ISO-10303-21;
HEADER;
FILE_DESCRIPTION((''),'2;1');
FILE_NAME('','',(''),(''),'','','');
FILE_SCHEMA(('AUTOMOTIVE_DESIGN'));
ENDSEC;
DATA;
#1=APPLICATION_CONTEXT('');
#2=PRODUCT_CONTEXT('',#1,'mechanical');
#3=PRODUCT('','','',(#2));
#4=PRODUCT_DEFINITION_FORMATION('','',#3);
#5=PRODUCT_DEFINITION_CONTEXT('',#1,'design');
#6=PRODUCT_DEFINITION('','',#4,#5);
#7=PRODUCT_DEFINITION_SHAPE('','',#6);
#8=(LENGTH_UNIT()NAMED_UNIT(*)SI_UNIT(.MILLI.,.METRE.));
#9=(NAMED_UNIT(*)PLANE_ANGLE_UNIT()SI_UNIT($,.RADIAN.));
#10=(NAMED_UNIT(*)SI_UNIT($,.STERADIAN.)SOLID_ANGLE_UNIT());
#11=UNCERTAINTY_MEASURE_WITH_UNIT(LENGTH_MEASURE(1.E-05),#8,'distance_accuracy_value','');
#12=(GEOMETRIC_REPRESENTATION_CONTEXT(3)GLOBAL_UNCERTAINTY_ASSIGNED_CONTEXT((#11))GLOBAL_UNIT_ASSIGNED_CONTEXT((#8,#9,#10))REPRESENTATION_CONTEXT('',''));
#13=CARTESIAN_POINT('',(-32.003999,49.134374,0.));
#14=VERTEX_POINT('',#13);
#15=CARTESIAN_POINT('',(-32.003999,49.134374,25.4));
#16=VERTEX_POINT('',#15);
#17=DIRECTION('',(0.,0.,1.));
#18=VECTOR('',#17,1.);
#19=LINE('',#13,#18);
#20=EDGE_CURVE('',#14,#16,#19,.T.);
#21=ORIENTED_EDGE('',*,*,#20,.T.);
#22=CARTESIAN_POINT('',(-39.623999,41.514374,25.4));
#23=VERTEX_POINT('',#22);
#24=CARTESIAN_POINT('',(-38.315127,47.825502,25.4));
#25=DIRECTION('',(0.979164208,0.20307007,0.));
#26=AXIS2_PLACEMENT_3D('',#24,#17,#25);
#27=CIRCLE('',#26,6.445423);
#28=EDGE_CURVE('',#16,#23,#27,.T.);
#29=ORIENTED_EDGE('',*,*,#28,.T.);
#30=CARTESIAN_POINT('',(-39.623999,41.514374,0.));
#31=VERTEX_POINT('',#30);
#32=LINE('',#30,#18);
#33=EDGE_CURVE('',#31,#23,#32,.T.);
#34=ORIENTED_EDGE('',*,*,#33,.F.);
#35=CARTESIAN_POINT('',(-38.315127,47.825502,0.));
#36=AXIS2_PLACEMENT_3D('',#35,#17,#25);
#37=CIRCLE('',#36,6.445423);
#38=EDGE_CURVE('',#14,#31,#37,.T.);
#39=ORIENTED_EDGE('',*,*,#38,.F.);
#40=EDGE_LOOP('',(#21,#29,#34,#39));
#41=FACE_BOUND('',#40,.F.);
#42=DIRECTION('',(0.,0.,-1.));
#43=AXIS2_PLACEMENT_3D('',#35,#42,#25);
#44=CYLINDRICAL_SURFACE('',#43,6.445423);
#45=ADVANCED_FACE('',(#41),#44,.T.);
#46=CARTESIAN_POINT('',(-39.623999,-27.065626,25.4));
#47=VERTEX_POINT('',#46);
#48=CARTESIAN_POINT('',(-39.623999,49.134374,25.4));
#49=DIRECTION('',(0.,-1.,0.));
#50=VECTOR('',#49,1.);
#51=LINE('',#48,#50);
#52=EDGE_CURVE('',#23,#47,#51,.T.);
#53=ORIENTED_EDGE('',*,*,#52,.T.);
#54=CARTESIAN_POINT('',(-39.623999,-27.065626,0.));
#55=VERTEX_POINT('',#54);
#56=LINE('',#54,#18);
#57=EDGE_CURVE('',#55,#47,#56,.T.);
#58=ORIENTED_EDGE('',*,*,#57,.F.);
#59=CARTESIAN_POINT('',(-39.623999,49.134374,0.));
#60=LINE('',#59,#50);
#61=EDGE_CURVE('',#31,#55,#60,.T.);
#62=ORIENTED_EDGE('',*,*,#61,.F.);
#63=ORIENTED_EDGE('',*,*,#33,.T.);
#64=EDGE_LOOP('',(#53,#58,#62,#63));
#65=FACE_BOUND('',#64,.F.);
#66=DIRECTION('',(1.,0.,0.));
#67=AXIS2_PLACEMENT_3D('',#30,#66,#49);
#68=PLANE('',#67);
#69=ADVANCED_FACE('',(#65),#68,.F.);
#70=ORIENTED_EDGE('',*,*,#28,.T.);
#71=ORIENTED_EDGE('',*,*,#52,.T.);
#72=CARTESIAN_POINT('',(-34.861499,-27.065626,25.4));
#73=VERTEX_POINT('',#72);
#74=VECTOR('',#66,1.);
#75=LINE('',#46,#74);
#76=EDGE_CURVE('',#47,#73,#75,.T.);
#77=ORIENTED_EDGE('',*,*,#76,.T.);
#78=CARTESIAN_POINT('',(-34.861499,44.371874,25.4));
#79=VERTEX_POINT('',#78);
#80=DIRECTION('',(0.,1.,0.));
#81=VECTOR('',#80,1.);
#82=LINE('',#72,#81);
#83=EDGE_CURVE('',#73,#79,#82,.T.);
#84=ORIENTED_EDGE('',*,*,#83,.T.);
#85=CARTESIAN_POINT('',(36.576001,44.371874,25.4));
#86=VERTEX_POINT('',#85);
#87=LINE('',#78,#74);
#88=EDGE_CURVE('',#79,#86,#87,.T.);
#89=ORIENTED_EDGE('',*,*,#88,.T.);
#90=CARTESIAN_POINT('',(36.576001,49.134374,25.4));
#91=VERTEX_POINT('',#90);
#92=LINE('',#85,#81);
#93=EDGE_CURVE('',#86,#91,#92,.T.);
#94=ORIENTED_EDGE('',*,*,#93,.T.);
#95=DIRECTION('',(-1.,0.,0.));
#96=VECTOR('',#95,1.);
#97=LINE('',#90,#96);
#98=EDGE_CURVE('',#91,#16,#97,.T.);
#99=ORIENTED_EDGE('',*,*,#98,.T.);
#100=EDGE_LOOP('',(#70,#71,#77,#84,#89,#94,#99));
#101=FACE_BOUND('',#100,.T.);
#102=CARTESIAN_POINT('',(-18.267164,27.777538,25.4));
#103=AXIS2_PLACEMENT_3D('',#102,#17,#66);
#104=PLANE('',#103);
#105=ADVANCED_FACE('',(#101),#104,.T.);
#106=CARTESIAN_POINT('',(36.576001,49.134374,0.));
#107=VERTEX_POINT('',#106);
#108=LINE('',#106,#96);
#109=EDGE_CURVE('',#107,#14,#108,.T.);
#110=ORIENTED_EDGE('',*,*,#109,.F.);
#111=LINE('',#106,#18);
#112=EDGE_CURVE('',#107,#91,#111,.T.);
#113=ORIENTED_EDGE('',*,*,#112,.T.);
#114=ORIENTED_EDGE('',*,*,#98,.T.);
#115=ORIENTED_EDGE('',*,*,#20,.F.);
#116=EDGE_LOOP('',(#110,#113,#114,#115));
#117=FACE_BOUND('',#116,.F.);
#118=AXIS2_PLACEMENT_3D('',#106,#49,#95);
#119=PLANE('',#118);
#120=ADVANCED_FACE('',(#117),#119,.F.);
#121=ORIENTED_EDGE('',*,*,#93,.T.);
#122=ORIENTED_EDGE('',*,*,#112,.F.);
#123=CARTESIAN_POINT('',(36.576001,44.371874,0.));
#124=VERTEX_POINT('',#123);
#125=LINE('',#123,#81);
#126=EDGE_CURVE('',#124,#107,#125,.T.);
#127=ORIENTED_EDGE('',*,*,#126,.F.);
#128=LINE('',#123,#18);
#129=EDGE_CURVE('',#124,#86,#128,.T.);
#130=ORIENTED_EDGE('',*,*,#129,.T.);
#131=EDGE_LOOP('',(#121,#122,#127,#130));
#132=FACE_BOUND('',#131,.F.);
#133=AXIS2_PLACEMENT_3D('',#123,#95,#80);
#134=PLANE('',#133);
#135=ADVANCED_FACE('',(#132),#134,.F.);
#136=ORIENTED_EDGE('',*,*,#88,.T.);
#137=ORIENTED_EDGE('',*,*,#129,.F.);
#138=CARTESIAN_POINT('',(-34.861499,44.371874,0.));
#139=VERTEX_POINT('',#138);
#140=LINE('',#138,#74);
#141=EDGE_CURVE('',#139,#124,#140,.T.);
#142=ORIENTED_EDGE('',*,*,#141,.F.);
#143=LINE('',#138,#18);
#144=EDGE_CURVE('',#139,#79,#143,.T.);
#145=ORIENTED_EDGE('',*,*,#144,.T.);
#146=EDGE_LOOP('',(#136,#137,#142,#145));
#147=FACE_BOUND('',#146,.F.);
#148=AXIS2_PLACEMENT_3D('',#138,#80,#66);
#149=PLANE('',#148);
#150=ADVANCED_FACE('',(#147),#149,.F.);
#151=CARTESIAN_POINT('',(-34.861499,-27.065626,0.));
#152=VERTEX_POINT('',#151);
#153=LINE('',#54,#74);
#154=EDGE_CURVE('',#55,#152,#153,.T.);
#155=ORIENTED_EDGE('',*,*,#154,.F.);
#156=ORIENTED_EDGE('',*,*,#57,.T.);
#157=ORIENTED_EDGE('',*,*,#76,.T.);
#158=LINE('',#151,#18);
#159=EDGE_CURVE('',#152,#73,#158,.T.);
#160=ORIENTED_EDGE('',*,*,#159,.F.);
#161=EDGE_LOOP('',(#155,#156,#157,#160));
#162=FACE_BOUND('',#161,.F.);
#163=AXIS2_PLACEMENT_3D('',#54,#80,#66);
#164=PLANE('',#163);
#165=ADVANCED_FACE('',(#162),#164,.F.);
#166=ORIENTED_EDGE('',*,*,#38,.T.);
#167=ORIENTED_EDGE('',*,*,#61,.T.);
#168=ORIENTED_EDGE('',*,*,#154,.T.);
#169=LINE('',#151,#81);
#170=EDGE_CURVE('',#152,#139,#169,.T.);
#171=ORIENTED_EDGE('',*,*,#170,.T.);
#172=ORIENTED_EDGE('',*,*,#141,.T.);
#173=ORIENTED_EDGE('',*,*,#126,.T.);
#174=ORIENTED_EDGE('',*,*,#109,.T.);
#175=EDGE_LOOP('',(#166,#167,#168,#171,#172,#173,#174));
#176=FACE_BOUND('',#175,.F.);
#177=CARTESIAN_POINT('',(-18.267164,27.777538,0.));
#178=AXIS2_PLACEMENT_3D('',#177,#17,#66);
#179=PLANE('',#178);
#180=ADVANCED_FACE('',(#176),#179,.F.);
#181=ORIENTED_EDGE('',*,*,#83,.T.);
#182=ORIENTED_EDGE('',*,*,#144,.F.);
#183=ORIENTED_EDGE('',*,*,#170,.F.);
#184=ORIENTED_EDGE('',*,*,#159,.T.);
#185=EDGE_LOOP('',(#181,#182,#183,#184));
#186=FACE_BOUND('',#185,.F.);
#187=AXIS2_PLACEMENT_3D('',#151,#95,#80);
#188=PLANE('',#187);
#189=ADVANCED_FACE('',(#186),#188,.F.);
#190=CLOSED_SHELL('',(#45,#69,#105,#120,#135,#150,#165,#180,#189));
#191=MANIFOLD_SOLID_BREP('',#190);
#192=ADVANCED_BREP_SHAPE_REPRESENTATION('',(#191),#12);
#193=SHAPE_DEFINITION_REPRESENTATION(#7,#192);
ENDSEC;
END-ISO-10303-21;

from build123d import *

# Parameters (mm, degrees)
F1_DEPTH = 25.4


# Not quite as in the source:
# - a feature names something its author has since deleted; it is built from what else it names


with BuildPart() as f1:
    # F0 (on Top) → F1 (new body)
    with BuildSketch(Plane.XY):
        Polygon((-32.0039994973, 49.1343741807), (-39.6239994973, 49.1343741807), (-39.6239994973, 41.5143741807), (-39.6239994973, -27.0656258193), (-34.8614994973, -27.0656258193), (-34.8614994973, 44.3718741807), (36.5760005027, 44.3718741807), (36.5760005027, 49.1343741807), align=None)
        with BuildLine():
            Line((-39.6239994973, 41.5143741807), (-39.6239994973, 49.1343741807))
            Line((-39.6239994973, 49.1343741807), (-32.0039994973, 49.1343741807))
            ThreePointArc((-32.0039994973, 49.1343741807), (-42.8727293035, 52.3831039869), (-39.6239994973, 41.5143741807))
        make_face()
    extrude(amount=F1_DEPTH)


solid = f1.part
